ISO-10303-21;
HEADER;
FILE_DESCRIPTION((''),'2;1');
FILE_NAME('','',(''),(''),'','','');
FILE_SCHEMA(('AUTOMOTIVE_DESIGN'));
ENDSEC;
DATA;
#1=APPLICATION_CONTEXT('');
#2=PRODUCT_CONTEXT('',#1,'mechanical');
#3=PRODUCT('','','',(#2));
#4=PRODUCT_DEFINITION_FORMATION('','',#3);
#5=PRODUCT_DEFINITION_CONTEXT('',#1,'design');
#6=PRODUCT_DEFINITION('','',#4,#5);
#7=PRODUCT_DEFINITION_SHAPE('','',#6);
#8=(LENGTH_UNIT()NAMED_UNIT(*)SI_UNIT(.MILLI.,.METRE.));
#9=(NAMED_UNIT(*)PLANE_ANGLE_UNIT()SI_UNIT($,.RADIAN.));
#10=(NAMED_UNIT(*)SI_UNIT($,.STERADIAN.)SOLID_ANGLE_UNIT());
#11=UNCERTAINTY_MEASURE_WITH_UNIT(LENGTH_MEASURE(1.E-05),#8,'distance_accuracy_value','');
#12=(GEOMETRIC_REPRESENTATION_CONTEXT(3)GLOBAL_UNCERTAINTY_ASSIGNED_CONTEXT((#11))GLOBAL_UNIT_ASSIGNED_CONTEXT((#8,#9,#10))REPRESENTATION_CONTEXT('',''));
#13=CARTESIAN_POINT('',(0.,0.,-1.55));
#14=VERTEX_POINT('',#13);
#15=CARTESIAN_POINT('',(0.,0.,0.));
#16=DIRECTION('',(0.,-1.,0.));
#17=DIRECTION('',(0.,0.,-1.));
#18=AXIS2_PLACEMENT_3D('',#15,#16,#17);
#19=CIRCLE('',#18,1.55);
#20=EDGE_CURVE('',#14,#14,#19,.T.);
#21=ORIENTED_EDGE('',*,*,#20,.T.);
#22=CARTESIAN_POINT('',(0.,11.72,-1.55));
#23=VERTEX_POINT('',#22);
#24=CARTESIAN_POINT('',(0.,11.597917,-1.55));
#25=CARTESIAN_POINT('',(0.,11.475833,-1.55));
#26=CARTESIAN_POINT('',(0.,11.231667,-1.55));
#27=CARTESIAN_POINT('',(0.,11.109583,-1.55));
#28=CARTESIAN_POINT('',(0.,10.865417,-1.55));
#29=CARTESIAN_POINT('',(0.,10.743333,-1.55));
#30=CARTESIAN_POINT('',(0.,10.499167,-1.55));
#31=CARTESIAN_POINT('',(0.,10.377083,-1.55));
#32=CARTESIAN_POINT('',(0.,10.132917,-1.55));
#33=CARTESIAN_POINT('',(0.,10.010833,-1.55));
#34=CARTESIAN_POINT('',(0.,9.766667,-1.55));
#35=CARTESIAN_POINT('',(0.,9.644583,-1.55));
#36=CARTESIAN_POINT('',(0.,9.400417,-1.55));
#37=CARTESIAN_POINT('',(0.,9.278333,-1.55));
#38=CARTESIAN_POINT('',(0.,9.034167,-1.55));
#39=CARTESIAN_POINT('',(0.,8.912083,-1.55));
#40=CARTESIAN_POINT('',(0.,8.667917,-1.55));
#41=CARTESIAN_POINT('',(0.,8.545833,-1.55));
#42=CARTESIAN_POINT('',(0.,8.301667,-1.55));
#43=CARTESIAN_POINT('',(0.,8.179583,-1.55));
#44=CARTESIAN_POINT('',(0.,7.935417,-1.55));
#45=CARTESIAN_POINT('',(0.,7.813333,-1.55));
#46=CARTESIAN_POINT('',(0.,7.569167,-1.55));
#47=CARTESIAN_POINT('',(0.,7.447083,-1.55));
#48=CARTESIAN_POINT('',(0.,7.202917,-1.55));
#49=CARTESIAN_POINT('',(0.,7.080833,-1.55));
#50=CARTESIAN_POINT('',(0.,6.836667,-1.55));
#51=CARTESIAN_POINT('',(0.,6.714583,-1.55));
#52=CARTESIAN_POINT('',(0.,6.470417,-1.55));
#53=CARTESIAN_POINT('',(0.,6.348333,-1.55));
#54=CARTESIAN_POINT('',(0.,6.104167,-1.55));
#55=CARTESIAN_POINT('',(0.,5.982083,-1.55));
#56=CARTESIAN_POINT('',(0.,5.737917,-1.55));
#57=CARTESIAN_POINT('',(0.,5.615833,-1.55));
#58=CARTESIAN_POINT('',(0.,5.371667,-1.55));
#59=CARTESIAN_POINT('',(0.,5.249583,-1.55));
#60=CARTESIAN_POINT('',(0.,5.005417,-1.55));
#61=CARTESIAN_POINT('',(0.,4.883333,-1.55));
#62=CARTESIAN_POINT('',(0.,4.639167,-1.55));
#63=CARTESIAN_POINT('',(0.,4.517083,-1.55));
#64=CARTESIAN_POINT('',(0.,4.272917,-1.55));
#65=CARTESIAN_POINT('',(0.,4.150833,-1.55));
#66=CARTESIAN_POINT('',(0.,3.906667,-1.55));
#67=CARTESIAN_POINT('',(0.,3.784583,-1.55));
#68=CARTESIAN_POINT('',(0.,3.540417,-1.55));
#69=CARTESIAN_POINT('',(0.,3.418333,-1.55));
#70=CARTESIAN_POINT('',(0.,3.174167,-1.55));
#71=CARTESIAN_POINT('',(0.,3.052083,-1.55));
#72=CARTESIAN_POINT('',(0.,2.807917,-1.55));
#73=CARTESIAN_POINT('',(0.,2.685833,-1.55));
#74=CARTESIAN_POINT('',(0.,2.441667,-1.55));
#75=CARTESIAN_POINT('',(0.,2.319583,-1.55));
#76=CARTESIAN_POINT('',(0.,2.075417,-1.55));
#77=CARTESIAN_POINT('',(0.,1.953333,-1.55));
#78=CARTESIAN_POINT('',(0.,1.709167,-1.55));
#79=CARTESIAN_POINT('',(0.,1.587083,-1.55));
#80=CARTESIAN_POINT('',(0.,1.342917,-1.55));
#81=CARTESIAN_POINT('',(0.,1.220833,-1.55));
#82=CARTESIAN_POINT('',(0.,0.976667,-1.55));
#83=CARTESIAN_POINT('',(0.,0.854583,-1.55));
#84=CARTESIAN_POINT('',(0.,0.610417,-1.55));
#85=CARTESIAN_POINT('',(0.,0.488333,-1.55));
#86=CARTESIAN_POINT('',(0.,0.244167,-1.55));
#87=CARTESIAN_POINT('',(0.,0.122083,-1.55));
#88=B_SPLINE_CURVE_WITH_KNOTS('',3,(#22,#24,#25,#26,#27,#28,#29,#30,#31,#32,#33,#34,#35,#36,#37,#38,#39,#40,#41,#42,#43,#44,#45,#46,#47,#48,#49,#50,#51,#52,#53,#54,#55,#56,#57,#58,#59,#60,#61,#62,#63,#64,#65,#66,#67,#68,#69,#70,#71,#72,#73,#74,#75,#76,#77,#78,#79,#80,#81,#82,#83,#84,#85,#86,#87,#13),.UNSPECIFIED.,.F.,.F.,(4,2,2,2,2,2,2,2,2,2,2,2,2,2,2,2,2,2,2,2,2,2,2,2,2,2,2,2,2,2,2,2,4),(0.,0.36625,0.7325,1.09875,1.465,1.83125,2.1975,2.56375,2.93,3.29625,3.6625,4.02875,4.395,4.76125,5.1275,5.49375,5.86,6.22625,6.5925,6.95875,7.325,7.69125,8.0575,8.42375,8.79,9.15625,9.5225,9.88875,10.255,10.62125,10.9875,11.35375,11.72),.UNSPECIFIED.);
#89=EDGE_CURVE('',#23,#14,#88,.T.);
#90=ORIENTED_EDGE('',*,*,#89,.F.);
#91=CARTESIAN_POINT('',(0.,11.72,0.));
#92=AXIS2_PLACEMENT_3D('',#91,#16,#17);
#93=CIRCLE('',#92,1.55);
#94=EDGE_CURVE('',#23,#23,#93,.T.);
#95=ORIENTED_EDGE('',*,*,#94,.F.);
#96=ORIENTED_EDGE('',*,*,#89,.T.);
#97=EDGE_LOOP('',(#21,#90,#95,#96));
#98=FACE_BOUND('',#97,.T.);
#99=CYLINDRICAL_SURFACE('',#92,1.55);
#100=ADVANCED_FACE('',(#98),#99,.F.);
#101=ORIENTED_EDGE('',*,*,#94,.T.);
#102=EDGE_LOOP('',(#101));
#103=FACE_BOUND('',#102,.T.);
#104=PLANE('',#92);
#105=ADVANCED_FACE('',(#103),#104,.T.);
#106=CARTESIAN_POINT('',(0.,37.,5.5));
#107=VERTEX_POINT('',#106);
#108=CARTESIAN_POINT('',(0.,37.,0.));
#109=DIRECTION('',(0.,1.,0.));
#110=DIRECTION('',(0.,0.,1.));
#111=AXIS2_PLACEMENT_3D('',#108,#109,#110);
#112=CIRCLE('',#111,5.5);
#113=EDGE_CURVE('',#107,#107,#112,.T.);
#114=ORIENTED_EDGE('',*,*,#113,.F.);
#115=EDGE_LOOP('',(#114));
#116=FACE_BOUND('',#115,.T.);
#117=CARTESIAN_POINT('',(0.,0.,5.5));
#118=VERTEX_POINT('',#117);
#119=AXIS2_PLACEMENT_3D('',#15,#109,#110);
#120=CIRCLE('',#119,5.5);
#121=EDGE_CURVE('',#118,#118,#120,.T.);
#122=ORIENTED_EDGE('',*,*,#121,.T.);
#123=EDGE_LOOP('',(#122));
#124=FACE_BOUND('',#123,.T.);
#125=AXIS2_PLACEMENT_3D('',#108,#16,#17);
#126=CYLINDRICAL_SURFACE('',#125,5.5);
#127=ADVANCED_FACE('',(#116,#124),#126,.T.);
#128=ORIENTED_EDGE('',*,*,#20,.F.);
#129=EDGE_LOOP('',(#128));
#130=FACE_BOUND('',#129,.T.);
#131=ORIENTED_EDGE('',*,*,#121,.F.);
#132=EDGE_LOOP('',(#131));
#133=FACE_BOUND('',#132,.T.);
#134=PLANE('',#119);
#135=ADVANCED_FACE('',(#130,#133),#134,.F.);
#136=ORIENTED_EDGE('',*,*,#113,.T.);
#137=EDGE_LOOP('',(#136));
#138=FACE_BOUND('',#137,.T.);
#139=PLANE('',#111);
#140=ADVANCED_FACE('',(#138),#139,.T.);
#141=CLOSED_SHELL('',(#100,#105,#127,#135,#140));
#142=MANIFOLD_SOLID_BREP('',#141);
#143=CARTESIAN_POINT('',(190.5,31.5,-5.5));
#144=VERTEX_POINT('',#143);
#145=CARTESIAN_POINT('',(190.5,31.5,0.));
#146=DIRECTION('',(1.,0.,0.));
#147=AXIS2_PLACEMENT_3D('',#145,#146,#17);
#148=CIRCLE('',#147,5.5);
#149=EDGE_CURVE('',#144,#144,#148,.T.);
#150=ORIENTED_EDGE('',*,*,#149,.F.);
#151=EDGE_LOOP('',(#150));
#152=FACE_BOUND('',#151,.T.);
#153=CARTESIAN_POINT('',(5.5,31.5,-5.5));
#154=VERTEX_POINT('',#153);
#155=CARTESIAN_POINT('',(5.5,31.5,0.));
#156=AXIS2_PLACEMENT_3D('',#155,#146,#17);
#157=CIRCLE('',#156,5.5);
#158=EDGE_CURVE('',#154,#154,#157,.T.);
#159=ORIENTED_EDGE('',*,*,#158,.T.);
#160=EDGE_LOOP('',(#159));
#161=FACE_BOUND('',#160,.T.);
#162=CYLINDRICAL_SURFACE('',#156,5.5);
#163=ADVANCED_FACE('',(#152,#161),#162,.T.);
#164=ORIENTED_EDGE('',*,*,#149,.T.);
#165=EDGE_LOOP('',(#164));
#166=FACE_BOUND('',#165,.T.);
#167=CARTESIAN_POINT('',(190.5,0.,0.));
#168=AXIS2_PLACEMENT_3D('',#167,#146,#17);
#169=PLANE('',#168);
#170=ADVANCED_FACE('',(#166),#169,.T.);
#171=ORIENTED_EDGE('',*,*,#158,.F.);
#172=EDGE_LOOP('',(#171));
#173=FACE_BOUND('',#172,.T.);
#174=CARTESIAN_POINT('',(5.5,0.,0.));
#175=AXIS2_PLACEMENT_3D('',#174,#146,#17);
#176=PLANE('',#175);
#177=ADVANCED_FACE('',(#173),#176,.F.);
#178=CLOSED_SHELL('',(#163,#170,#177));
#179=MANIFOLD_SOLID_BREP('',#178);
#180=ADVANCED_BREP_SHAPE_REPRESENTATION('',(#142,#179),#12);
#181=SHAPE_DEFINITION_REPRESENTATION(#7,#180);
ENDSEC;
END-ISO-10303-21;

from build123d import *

# Parameters (mm, degrees)
SKETCH1_R               = 5.5
BOSS_EXTRUDE1_DEPTH     = 37
BOSS_EXTRUDE2_START     = 5.5
BOSS_EXTRUDE2_OUTLINE_R = 5.5
BOSS_EXTRUDE2_DEPTH     = 185
SKETCH2_R               = 1.55
CUT_EXTRUDE1_DEPTH      = 11.72


# Read off the part's stored shape, not the designer's step: Boss-Extrude2
with BuildPart() as part:
    # Sketch1 → Boss-Extrude1 (new body)
    with BuildSketch(Plane(origin=(0, 0, 0), x_dir=(1, 0, 0), z_dir=(0, 1, 0))):
        with Locations(Location((0, 0, 0), (0, 0, 270))):
            Circle(SKETCH1_R)
    extrude(amount=BOSS_EXTRUDE1_DEPTH)

    # Sketch2 → Cut-Extrude1 (cut)
    with BuildSketch(Plane.XZ):
        with Locations(Location((0, 0, 0), (0, 0, 270))):
            Circle(SKETCH2_R)
    extrude(amount=-CUT_EXTRUDE1_DEPTH, mode=Mode.SUBTRACT)


with BuildPart() as body_2:
    # Boss-Extrude2 outline → Boss-Extrude2 (new body)
    with BuildSketch(Plane.YZ.offset(BOSS_EXTRUDE2_START)):
        with Locations((31.5, 0)):
            Circle(BOSS_EXTRUDE2_OUTLINE_R)
    extrude(amount=BOSS_EXTRUDE2_DEPTH)


solid = Compound([part.part, body_2.part])
